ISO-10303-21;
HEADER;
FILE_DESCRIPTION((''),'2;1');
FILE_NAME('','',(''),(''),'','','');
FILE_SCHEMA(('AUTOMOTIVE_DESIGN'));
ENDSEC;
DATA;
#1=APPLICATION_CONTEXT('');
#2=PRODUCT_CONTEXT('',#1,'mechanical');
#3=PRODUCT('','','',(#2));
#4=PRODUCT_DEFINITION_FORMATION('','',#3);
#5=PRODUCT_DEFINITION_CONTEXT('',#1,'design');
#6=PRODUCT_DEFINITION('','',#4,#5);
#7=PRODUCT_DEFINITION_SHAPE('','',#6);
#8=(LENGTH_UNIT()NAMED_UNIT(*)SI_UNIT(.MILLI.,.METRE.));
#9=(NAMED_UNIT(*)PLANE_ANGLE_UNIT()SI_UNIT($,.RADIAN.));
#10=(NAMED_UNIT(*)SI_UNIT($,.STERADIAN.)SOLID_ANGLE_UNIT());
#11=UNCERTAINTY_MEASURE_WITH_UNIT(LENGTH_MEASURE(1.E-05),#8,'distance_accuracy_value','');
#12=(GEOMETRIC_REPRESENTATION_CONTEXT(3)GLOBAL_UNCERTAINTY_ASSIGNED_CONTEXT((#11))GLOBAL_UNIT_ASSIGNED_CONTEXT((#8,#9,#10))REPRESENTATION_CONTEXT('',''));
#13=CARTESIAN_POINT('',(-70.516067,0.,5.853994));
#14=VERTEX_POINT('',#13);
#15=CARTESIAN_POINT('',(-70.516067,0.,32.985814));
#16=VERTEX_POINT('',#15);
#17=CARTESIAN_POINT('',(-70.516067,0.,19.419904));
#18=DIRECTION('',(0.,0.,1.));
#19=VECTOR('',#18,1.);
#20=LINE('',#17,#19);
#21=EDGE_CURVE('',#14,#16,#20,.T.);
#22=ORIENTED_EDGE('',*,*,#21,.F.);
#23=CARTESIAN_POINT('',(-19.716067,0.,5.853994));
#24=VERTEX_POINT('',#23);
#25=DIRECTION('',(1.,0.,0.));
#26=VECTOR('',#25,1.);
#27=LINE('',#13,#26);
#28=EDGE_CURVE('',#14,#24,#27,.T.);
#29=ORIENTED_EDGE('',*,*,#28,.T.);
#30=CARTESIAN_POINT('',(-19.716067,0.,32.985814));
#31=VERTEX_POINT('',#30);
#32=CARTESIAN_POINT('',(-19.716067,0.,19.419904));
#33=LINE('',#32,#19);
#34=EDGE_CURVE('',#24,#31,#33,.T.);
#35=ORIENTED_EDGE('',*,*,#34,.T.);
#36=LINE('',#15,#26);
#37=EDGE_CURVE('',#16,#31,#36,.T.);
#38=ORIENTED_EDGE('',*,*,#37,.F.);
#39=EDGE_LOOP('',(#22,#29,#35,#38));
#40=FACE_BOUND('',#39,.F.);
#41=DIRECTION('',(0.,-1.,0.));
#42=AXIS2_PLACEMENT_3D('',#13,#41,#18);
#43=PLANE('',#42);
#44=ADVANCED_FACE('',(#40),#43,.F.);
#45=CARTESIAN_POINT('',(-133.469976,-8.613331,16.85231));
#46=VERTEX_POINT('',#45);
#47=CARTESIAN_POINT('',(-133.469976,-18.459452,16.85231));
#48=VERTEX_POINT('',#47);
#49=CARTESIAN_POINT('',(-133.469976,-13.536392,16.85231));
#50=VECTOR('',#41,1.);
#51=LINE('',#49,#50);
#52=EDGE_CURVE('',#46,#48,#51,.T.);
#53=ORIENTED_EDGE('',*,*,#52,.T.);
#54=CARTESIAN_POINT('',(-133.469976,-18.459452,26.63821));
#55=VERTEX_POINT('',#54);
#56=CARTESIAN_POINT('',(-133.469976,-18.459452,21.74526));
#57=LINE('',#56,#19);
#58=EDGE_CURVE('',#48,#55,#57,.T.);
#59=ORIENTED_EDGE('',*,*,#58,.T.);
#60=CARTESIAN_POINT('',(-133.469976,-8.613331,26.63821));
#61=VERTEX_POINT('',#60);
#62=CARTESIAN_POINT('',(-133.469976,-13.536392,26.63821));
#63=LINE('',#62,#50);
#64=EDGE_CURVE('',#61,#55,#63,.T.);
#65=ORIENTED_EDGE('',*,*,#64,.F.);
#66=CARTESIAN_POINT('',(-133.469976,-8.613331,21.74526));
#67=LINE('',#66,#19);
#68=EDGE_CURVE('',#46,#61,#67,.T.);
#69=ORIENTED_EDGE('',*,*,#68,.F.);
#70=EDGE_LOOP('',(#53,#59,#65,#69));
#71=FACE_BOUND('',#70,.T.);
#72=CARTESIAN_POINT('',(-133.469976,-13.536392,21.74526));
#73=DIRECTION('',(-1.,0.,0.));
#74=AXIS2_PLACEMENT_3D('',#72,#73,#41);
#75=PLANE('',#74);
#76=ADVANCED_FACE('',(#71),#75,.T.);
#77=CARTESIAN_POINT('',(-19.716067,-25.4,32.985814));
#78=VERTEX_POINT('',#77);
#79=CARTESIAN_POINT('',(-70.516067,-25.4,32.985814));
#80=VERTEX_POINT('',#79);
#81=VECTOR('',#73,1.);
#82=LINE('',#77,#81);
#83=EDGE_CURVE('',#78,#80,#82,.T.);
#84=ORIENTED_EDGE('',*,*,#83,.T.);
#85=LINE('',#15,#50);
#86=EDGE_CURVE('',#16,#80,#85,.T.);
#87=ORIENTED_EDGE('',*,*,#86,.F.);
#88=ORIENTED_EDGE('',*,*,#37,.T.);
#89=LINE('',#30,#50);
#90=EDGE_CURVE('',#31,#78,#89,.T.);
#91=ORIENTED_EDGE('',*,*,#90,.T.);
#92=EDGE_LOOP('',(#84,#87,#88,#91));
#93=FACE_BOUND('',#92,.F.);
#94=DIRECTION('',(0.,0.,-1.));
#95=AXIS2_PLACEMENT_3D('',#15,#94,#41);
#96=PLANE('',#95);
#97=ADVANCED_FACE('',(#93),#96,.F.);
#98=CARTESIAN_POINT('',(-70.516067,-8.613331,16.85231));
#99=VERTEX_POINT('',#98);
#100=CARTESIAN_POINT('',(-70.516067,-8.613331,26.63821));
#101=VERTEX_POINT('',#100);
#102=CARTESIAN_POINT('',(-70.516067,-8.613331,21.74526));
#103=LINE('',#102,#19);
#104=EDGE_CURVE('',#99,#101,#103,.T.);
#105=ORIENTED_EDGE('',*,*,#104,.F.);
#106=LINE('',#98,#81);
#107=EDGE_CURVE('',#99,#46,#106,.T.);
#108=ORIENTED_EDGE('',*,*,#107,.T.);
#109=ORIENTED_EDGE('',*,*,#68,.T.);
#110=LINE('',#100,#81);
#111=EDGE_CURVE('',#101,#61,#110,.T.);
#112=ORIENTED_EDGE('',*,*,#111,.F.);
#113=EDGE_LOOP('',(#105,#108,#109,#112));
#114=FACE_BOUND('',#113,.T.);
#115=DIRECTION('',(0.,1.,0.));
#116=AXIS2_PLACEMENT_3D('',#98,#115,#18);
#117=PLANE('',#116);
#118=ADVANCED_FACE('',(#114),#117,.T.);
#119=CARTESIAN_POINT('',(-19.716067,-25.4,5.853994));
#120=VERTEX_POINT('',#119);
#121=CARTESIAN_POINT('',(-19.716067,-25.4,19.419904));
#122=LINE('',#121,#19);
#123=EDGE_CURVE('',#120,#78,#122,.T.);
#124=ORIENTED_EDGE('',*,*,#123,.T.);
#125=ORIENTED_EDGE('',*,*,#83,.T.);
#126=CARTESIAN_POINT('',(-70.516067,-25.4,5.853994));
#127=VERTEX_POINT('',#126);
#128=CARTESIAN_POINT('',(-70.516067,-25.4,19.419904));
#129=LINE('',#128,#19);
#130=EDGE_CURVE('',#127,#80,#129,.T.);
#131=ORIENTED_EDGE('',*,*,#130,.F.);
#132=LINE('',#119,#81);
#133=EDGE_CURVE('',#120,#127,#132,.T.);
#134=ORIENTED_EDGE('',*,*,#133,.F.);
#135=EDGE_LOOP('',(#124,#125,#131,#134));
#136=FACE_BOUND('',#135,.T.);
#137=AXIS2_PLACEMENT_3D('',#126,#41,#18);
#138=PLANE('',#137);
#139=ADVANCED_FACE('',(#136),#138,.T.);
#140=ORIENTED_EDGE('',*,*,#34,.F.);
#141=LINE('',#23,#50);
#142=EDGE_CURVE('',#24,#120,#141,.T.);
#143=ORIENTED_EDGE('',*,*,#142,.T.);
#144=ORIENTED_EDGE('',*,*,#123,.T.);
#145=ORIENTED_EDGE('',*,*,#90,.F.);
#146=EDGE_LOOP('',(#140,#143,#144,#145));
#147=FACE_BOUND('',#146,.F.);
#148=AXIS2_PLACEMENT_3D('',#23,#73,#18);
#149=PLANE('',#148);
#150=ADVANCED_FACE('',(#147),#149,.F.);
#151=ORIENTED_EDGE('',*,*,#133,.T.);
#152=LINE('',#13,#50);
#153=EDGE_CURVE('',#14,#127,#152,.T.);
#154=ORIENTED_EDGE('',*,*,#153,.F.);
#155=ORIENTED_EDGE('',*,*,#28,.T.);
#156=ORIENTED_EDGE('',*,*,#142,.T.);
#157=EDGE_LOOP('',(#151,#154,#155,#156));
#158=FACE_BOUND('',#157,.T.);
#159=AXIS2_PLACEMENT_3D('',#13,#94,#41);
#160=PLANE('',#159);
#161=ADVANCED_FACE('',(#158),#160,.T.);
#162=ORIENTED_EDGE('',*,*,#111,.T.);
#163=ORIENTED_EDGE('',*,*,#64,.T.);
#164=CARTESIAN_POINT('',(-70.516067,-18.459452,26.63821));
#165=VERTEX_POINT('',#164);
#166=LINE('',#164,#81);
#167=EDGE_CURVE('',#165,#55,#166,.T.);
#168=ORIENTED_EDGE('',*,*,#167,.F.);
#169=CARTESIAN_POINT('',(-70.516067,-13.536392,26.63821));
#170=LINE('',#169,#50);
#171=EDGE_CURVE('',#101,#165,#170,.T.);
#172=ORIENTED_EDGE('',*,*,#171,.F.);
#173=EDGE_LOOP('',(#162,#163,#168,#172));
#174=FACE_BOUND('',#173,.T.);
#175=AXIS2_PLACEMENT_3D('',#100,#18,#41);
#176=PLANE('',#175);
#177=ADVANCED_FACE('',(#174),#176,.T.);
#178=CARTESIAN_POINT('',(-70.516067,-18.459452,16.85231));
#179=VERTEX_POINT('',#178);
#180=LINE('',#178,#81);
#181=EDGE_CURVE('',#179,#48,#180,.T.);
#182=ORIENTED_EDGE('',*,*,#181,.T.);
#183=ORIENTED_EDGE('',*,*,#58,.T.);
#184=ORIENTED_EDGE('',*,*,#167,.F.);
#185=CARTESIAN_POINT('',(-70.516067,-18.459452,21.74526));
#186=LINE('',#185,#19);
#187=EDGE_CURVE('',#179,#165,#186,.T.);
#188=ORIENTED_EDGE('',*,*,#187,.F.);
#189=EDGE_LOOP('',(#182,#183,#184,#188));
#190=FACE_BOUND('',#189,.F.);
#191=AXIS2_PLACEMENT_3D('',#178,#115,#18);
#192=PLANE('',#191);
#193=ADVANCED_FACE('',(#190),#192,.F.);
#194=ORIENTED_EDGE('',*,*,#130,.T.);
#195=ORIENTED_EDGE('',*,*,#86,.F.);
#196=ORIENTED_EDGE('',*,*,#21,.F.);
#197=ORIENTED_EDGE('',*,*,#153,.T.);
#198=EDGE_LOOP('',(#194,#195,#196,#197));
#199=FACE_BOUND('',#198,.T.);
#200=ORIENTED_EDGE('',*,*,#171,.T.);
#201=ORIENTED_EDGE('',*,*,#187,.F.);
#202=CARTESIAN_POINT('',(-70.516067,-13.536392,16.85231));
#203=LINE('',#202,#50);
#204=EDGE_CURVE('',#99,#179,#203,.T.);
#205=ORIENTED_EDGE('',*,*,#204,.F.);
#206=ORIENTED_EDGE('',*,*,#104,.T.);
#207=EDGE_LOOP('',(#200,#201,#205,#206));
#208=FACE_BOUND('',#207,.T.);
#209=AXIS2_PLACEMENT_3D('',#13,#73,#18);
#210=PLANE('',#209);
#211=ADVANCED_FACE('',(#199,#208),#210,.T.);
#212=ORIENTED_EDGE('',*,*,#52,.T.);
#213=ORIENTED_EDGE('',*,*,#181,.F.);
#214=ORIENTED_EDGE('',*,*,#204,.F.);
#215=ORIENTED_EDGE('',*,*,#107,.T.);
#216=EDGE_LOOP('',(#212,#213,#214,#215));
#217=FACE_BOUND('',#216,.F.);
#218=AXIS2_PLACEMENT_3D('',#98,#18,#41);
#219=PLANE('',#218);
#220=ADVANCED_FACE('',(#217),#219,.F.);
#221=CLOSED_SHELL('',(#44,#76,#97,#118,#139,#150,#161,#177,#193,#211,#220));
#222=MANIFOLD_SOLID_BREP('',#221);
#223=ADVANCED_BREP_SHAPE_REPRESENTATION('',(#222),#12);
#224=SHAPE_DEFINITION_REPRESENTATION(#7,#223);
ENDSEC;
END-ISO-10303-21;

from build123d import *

# Parameters (mm, degrees)
F0_W     = 50.8
F0_H     = 27.1318203053
F1_DEPTH = 25.4
F2_DEPTH = 25.4
F4_W     = 9.8461210728
F4_H     = 9.7858998924
F5_DEPTH = 62.9539089


# Not quite as in the source:
# - an extrude ends at something that could not be found from the text; its depth is read off the source's solid


with BuildPart() as f1:
    # F0 (on Front) → F1 (new body)
    with BuildSketch(Plane.XZ):
        with Locations((-45.1160669327, 19.4199038669)):
            Rectangle(F0_W, F0_H)
    extrude(amount=F1_DEPTH)

    # F2 (add): a face of the model
    f2_faces = [f1.faces().sort_by_distance(p)[0] for p in [
        (-70.5160669327, -12.7, 19.4199038669),
    ]]
    extrude(f2_faces, amount=-F2_DEPTH)

    # F4 (on face) → F5 (join, through all)
    with BuildSketch(Plane(origin=(-70.5160669327, 0, 0), x_dir=(0, -1, 0), z_dir=(-1, 0, 0))):
        with Locations((13.5363917798, 21.7452598736)):
            Rectangle(F4_W, F4_H)
    extrude(amount=F5_DEPTH)


solid = f1.part
